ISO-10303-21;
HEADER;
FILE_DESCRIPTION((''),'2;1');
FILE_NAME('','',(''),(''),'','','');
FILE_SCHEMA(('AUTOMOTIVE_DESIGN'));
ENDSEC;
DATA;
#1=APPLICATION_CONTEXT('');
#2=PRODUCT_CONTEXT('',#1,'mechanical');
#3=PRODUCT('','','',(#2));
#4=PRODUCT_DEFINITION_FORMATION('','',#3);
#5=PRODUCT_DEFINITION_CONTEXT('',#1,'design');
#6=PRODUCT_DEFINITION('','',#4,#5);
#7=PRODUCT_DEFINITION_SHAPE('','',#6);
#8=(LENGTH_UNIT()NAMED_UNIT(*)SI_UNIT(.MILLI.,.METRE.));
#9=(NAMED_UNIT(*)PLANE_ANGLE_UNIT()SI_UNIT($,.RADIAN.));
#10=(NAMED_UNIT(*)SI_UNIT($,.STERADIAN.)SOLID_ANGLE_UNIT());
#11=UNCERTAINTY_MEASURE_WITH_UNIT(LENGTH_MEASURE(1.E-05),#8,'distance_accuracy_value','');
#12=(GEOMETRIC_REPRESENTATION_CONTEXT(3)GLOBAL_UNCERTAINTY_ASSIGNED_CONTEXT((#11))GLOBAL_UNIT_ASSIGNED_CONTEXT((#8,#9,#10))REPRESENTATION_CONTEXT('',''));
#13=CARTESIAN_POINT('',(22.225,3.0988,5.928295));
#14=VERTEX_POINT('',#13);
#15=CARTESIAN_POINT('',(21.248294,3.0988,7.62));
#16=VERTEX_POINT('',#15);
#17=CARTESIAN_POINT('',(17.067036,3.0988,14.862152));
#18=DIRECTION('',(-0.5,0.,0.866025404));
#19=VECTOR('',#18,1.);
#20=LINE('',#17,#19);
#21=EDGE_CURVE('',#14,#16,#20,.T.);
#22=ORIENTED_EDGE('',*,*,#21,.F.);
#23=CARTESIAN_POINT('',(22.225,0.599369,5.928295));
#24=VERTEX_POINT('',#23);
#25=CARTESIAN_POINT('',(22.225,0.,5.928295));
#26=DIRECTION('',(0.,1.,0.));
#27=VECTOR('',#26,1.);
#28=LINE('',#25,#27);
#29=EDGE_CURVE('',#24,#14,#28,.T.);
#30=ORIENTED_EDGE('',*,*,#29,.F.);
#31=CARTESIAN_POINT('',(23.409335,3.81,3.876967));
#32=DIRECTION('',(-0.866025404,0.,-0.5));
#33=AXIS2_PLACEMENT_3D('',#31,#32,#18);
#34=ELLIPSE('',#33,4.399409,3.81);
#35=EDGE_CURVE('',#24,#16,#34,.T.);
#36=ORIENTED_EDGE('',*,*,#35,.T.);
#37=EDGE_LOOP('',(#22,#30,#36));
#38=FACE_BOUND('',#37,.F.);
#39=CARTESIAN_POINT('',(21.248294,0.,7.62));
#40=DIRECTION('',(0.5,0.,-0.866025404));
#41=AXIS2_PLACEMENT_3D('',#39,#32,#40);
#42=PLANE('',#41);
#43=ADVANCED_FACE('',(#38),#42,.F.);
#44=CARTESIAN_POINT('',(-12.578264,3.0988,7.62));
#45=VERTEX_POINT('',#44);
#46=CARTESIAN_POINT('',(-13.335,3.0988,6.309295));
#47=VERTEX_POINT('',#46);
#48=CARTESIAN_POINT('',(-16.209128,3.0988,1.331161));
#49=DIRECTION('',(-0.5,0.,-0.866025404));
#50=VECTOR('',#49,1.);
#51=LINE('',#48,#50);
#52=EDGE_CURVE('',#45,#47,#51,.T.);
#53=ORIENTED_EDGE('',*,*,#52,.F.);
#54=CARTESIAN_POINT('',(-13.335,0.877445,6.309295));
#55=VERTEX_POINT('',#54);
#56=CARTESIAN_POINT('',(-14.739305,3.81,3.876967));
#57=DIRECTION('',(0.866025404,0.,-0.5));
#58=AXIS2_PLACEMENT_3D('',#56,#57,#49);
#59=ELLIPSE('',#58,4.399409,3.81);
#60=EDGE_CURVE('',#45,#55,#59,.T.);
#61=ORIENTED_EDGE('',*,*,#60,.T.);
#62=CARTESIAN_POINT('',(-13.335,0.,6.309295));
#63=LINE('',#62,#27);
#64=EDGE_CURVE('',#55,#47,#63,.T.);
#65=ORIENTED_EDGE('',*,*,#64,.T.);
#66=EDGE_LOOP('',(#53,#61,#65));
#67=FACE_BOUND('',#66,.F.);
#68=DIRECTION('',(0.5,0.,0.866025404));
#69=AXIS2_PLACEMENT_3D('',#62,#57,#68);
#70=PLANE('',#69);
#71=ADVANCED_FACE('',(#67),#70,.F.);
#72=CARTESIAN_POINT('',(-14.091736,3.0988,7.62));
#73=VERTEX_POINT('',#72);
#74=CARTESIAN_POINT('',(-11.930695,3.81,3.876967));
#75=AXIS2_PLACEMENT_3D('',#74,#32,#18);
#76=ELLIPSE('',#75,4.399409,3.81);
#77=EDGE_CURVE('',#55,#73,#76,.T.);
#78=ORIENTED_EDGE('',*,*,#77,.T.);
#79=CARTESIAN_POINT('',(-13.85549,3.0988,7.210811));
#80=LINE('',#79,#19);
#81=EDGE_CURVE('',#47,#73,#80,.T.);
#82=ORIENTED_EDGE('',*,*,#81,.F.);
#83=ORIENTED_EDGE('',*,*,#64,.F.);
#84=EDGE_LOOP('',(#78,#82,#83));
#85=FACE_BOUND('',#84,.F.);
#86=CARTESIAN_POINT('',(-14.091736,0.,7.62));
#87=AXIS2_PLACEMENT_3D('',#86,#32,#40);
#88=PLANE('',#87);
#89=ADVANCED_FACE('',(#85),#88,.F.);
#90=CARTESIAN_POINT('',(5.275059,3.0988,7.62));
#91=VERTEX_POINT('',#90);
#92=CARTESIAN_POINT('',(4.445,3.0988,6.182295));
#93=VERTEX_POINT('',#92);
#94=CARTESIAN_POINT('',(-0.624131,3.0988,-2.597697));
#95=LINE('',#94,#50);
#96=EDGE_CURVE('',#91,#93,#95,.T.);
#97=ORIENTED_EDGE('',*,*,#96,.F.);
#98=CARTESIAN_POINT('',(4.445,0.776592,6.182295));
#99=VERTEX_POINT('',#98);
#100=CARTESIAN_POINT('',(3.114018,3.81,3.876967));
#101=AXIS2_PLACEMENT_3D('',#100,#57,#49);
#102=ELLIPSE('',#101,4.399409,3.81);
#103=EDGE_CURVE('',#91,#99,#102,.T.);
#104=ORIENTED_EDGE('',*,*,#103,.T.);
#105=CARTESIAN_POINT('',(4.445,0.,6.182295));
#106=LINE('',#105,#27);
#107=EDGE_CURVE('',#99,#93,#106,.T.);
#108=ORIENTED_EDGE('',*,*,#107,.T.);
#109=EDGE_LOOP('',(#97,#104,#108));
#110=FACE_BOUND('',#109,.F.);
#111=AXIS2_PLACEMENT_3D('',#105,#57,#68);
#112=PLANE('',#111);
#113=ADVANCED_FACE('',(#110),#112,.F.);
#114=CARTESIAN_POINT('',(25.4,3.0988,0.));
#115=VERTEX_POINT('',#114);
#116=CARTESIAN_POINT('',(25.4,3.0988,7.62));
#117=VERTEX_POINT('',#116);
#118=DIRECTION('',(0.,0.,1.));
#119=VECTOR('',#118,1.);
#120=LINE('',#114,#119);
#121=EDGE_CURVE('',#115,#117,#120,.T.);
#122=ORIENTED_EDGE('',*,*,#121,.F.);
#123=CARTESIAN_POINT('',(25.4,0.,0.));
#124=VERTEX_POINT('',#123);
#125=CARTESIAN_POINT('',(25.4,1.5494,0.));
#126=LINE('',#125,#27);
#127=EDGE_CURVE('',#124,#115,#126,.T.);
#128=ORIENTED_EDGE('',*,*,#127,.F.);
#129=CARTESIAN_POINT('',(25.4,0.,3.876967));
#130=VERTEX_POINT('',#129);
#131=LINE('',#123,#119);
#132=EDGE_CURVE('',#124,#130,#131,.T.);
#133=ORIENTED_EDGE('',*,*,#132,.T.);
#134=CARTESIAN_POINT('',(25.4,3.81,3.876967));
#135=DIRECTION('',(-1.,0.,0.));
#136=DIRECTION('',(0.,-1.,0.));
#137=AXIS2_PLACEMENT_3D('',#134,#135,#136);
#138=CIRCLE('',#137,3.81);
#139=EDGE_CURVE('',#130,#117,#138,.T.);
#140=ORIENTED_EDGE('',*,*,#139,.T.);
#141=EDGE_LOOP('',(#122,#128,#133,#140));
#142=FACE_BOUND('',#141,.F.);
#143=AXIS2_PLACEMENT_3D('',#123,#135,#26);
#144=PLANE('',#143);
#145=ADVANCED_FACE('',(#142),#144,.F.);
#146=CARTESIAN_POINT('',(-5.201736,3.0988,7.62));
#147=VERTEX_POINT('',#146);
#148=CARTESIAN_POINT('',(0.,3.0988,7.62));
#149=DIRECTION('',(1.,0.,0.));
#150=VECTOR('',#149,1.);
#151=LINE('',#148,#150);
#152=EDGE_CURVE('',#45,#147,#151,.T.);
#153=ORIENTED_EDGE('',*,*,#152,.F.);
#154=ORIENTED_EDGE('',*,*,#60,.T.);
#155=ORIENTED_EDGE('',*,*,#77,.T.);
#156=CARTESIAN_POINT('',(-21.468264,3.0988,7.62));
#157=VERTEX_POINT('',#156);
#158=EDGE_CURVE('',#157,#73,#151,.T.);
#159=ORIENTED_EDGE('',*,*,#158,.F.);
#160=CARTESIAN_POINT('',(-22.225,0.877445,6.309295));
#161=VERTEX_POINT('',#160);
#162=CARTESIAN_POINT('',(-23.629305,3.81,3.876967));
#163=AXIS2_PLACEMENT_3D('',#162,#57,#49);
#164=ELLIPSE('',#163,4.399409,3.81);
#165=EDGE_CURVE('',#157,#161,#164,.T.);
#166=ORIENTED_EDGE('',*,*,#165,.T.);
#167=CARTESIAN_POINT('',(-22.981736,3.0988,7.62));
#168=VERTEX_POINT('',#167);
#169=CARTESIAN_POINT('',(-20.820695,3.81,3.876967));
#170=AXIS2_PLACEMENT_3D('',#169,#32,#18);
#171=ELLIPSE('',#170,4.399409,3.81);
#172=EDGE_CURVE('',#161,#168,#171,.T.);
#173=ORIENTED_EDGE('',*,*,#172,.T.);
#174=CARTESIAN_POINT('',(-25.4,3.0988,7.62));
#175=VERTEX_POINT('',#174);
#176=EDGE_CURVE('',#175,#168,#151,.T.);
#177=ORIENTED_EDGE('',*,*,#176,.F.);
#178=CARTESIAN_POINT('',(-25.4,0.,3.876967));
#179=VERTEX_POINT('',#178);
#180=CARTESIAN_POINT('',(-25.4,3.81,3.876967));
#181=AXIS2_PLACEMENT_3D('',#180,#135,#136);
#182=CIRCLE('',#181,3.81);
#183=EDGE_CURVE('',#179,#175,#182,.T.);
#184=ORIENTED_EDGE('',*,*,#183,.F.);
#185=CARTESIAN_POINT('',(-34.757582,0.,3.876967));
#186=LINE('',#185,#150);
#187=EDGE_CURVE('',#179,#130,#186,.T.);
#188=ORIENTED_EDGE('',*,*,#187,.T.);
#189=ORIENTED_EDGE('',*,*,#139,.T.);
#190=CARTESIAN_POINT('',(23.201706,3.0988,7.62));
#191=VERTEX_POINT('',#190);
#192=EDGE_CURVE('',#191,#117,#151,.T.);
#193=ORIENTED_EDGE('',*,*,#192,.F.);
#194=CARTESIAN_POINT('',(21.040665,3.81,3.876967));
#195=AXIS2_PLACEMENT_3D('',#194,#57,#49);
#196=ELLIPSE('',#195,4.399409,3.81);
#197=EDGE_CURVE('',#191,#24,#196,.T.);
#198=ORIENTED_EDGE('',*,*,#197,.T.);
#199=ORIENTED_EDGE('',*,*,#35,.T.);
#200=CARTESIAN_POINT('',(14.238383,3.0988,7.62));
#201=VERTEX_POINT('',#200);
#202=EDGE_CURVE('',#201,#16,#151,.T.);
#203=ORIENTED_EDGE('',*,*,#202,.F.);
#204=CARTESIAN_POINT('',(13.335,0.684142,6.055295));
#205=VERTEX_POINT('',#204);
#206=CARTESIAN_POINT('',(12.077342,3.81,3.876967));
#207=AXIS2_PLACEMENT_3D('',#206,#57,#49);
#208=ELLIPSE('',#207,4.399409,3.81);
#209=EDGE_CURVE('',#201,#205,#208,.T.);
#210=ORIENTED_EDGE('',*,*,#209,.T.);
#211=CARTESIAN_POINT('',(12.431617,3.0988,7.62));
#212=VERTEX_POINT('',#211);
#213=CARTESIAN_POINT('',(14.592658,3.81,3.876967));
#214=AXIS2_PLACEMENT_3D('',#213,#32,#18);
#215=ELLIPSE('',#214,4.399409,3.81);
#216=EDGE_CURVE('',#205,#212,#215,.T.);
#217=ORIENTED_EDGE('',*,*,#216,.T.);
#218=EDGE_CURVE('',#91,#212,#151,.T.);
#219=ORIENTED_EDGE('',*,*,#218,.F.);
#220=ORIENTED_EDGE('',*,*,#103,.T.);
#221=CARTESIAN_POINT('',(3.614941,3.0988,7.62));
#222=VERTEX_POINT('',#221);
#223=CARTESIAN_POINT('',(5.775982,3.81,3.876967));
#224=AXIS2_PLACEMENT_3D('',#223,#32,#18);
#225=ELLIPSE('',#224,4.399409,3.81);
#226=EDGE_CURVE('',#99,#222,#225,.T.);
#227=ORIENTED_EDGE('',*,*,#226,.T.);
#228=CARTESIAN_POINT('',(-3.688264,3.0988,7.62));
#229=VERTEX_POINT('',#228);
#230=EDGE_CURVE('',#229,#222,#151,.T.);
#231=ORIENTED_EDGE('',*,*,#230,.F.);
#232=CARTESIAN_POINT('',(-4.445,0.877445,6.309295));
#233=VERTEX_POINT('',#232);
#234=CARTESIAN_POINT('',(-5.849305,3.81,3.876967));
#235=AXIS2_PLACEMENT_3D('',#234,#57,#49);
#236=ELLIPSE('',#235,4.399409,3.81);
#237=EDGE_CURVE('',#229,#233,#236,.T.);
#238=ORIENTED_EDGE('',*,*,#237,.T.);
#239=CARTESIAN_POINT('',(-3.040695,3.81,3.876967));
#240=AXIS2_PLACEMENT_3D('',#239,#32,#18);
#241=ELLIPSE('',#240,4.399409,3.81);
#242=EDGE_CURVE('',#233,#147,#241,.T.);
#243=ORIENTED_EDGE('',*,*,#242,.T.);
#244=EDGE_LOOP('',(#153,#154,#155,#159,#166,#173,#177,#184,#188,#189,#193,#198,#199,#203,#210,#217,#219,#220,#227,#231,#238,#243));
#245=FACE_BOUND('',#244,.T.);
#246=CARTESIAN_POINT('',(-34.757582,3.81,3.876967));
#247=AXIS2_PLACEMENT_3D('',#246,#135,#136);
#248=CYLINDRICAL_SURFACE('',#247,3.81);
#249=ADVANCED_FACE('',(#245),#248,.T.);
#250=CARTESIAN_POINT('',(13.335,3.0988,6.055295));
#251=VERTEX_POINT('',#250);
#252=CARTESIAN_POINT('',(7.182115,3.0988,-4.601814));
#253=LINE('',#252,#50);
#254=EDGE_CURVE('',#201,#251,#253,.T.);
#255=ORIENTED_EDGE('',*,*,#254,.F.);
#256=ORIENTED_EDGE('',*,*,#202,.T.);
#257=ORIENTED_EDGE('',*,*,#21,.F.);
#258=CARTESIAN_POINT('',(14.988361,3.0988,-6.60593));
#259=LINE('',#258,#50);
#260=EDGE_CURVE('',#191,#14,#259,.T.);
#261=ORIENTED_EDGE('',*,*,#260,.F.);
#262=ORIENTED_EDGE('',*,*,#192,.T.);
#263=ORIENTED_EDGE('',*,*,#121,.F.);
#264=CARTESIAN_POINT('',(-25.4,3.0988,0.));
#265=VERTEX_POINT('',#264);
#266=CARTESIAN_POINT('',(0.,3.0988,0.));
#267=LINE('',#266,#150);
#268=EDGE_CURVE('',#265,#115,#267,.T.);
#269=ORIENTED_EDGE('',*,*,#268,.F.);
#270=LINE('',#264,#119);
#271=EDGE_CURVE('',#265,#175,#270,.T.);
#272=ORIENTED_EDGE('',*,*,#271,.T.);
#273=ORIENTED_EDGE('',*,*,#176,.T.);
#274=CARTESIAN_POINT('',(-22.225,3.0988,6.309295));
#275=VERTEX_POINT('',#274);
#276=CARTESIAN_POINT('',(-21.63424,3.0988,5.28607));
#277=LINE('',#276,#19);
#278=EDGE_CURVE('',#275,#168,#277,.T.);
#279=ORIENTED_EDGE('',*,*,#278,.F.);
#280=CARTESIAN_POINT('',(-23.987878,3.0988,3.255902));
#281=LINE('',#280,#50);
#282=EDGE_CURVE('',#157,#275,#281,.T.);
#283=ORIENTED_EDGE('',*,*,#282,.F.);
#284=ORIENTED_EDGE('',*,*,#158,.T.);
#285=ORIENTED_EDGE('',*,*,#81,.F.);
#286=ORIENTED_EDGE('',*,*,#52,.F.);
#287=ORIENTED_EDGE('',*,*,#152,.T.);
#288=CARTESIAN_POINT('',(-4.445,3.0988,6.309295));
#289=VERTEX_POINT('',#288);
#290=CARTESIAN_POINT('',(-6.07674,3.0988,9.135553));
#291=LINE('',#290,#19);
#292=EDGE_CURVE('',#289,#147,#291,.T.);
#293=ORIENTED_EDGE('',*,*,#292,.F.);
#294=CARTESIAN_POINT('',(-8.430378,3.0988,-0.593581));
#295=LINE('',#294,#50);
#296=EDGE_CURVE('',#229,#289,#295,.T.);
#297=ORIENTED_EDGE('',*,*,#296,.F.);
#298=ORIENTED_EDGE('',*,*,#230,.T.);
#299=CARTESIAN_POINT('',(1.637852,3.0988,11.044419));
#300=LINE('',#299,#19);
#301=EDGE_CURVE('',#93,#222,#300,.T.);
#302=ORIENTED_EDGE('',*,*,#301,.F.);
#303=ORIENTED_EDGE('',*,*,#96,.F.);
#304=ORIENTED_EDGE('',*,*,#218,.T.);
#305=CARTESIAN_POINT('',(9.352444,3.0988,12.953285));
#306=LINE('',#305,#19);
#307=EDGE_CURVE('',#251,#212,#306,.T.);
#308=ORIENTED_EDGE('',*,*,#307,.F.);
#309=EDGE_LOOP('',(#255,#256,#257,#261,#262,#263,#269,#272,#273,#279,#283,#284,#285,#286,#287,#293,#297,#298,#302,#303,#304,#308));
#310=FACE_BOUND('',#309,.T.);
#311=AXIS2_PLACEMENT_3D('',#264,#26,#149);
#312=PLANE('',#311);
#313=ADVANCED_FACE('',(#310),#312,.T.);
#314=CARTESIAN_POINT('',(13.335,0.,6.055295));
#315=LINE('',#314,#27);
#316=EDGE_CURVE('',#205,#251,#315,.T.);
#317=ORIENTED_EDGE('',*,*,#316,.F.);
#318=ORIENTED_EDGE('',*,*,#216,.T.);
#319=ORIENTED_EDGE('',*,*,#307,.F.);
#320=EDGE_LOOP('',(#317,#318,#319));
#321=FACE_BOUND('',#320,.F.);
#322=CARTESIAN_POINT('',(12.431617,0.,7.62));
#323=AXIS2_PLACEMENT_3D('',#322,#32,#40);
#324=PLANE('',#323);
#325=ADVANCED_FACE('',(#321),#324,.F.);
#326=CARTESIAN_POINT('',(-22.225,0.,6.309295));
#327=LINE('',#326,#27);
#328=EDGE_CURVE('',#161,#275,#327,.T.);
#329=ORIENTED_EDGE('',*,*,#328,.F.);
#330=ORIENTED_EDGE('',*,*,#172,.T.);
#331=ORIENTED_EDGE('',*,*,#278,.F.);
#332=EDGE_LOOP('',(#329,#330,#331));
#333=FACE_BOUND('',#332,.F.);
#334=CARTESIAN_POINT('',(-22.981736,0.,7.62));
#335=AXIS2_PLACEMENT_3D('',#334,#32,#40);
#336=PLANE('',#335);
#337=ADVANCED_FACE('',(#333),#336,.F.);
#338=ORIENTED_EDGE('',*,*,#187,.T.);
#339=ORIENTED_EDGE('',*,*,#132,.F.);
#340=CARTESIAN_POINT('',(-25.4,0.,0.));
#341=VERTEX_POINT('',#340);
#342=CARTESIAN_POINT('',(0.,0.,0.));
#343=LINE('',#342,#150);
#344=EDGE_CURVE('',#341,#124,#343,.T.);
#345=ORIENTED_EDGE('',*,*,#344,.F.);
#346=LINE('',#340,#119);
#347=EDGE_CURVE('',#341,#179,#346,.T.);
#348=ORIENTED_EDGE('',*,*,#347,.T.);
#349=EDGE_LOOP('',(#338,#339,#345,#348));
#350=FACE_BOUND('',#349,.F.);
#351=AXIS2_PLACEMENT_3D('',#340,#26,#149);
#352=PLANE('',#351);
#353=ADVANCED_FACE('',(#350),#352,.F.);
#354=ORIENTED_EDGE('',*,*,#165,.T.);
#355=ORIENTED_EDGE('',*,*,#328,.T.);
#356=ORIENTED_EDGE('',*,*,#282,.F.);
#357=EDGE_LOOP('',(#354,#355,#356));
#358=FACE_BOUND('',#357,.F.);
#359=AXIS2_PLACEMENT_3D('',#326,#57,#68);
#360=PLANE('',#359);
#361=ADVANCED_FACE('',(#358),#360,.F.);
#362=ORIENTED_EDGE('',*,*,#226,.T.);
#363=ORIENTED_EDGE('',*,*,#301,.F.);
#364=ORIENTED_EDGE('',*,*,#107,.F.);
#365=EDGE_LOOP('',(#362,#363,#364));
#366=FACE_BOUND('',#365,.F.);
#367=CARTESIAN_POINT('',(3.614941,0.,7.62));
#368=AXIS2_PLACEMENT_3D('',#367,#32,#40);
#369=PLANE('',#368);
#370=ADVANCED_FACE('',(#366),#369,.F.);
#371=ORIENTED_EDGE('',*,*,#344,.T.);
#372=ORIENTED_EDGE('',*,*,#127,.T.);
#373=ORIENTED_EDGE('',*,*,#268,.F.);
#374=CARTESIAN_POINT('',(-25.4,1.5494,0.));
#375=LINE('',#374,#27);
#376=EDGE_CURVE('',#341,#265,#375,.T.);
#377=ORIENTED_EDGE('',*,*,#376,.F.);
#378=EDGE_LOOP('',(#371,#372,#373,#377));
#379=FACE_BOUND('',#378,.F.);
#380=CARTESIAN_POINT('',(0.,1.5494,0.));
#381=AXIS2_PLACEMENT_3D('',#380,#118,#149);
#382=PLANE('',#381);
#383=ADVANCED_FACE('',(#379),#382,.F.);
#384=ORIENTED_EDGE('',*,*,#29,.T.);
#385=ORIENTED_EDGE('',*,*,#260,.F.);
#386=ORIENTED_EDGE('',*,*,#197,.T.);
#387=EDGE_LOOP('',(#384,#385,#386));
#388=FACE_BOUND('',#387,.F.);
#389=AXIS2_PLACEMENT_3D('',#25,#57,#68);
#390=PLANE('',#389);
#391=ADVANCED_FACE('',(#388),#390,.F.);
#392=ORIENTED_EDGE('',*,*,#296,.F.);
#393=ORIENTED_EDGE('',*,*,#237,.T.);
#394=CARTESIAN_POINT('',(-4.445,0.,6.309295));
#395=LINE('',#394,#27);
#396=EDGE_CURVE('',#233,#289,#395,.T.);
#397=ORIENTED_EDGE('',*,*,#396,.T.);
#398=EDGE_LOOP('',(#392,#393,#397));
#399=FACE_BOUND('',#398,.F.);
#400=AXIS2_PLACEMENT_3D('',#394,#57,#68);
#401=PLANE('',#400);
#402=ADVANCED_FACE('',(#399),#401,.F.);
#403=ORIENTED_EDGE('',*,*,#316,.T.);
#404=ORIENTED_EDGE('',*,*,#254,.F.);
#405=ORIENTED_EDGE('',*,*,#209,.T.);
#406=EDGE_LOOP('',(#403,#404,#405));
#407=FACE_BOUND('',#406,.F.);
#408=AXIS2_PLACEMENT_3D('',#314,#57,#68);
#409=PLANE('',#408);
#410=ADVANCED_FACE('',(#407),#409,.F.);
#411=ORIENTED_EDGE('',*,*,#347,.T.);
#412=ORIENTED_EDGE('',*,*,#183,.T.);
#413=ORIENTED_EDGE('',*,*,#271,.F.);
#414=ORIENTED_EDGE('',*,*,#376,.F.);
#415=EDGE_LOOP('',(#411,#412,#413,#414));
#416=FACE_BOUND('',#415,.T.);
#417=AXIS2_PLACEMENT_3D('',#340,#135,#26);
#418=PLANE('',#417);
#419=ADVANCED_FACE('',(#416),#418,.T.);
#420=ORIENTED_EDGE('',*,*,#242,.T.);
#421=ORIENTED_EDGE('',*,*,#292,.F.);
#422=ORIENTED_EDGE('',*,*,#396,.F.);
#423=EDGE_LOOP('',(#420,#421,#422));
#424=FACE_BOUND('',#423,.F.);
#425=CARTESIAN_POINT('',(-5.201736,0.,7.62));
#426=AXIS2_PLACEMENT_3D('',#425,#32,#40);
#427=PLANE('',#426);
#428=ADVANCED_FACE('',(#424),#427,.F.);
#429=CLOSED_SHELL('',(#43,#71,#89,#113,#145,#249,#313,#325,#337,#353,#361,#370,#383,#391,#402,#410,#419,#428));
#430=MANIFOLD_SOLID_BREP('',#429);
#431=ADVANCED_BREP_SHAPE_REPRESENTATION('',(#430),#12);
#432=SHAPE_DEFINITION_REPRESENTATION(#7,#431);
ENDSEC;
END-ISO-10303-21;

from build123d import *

# Parameters (mm, degrees)
F0_W        = 50.8
F0_H        = 3.0988
F1_DEPTH    = 7.62
F3_T1_DEPTH = 69.5151640121
F4_DEPTH    = 25.4


# Not quite as in the source:
# - a fillet or chamfer that OpenCascade refuses, or shapes differently, is made with other operations: its cross-section is extruded or revolved along the edge and cut away or added


with BuildPart() as f1:
    # F0 (on Top) → F1 (new body)
    with BuildSketch(Plane.XY):
        with Locations((0, 1.5494)):
            Rectangle(F0_W, F0_H)
    extrude(amount=F1_DEPTH)

    # F3: fillet of radius 3.81 on 1 edges, made by hand

    # F3_s2 → F3_t1 (cut)
    with BuildSketch(Plane.YZ.offset(-34.7575820061)):
        with BuildLine():
            ThreePointArc((0, 3.8769671976), (0.8752281179, 6.3066202592), (3.0988, 7.62))
            Line((3.0988, 7.62), (0, 7.62))
            Line((0, 7.62), (0, 3.8769671976))
        make_face()
    extrude(amount=F3_T1_DEPTH, mode=Mode.SUBTRACT)

    # F2 (on face) → F4 (cut)
    with BuildSketch(Plane.XZ):
        Polygon((-22.225, 6.3092954744), (-21.4682643893, 7.62), (-22.9817356107, 7.62), align=None)
        Polygon((-12.5782643893, 7.62), (-14.0917356107, 7.62), (-13.335, 6.3092954744), align=None)
        Polygon((14.2383825791, 7.62), (12.4316174209, 7.62), (13.335, 6.0552954744), align=None)
        Polygon((22.225, 5.9282954744), (23.2017060633, 7.62), (21.2482939367, 7.62), align=None)
        Polygon((-3.6882643893, 7.62), (-5.2017356107, 7.62), (-4.445, 6.3092954744), align=None)
        Polygon((5.2750590949, 7.62), (3.6149409051, 7.62), (4.445, 6.1822954744), align=None)
    extrude(amount=-F4_DEPTH, mode=Mode.SUBTRACT)


solid = f1.part
